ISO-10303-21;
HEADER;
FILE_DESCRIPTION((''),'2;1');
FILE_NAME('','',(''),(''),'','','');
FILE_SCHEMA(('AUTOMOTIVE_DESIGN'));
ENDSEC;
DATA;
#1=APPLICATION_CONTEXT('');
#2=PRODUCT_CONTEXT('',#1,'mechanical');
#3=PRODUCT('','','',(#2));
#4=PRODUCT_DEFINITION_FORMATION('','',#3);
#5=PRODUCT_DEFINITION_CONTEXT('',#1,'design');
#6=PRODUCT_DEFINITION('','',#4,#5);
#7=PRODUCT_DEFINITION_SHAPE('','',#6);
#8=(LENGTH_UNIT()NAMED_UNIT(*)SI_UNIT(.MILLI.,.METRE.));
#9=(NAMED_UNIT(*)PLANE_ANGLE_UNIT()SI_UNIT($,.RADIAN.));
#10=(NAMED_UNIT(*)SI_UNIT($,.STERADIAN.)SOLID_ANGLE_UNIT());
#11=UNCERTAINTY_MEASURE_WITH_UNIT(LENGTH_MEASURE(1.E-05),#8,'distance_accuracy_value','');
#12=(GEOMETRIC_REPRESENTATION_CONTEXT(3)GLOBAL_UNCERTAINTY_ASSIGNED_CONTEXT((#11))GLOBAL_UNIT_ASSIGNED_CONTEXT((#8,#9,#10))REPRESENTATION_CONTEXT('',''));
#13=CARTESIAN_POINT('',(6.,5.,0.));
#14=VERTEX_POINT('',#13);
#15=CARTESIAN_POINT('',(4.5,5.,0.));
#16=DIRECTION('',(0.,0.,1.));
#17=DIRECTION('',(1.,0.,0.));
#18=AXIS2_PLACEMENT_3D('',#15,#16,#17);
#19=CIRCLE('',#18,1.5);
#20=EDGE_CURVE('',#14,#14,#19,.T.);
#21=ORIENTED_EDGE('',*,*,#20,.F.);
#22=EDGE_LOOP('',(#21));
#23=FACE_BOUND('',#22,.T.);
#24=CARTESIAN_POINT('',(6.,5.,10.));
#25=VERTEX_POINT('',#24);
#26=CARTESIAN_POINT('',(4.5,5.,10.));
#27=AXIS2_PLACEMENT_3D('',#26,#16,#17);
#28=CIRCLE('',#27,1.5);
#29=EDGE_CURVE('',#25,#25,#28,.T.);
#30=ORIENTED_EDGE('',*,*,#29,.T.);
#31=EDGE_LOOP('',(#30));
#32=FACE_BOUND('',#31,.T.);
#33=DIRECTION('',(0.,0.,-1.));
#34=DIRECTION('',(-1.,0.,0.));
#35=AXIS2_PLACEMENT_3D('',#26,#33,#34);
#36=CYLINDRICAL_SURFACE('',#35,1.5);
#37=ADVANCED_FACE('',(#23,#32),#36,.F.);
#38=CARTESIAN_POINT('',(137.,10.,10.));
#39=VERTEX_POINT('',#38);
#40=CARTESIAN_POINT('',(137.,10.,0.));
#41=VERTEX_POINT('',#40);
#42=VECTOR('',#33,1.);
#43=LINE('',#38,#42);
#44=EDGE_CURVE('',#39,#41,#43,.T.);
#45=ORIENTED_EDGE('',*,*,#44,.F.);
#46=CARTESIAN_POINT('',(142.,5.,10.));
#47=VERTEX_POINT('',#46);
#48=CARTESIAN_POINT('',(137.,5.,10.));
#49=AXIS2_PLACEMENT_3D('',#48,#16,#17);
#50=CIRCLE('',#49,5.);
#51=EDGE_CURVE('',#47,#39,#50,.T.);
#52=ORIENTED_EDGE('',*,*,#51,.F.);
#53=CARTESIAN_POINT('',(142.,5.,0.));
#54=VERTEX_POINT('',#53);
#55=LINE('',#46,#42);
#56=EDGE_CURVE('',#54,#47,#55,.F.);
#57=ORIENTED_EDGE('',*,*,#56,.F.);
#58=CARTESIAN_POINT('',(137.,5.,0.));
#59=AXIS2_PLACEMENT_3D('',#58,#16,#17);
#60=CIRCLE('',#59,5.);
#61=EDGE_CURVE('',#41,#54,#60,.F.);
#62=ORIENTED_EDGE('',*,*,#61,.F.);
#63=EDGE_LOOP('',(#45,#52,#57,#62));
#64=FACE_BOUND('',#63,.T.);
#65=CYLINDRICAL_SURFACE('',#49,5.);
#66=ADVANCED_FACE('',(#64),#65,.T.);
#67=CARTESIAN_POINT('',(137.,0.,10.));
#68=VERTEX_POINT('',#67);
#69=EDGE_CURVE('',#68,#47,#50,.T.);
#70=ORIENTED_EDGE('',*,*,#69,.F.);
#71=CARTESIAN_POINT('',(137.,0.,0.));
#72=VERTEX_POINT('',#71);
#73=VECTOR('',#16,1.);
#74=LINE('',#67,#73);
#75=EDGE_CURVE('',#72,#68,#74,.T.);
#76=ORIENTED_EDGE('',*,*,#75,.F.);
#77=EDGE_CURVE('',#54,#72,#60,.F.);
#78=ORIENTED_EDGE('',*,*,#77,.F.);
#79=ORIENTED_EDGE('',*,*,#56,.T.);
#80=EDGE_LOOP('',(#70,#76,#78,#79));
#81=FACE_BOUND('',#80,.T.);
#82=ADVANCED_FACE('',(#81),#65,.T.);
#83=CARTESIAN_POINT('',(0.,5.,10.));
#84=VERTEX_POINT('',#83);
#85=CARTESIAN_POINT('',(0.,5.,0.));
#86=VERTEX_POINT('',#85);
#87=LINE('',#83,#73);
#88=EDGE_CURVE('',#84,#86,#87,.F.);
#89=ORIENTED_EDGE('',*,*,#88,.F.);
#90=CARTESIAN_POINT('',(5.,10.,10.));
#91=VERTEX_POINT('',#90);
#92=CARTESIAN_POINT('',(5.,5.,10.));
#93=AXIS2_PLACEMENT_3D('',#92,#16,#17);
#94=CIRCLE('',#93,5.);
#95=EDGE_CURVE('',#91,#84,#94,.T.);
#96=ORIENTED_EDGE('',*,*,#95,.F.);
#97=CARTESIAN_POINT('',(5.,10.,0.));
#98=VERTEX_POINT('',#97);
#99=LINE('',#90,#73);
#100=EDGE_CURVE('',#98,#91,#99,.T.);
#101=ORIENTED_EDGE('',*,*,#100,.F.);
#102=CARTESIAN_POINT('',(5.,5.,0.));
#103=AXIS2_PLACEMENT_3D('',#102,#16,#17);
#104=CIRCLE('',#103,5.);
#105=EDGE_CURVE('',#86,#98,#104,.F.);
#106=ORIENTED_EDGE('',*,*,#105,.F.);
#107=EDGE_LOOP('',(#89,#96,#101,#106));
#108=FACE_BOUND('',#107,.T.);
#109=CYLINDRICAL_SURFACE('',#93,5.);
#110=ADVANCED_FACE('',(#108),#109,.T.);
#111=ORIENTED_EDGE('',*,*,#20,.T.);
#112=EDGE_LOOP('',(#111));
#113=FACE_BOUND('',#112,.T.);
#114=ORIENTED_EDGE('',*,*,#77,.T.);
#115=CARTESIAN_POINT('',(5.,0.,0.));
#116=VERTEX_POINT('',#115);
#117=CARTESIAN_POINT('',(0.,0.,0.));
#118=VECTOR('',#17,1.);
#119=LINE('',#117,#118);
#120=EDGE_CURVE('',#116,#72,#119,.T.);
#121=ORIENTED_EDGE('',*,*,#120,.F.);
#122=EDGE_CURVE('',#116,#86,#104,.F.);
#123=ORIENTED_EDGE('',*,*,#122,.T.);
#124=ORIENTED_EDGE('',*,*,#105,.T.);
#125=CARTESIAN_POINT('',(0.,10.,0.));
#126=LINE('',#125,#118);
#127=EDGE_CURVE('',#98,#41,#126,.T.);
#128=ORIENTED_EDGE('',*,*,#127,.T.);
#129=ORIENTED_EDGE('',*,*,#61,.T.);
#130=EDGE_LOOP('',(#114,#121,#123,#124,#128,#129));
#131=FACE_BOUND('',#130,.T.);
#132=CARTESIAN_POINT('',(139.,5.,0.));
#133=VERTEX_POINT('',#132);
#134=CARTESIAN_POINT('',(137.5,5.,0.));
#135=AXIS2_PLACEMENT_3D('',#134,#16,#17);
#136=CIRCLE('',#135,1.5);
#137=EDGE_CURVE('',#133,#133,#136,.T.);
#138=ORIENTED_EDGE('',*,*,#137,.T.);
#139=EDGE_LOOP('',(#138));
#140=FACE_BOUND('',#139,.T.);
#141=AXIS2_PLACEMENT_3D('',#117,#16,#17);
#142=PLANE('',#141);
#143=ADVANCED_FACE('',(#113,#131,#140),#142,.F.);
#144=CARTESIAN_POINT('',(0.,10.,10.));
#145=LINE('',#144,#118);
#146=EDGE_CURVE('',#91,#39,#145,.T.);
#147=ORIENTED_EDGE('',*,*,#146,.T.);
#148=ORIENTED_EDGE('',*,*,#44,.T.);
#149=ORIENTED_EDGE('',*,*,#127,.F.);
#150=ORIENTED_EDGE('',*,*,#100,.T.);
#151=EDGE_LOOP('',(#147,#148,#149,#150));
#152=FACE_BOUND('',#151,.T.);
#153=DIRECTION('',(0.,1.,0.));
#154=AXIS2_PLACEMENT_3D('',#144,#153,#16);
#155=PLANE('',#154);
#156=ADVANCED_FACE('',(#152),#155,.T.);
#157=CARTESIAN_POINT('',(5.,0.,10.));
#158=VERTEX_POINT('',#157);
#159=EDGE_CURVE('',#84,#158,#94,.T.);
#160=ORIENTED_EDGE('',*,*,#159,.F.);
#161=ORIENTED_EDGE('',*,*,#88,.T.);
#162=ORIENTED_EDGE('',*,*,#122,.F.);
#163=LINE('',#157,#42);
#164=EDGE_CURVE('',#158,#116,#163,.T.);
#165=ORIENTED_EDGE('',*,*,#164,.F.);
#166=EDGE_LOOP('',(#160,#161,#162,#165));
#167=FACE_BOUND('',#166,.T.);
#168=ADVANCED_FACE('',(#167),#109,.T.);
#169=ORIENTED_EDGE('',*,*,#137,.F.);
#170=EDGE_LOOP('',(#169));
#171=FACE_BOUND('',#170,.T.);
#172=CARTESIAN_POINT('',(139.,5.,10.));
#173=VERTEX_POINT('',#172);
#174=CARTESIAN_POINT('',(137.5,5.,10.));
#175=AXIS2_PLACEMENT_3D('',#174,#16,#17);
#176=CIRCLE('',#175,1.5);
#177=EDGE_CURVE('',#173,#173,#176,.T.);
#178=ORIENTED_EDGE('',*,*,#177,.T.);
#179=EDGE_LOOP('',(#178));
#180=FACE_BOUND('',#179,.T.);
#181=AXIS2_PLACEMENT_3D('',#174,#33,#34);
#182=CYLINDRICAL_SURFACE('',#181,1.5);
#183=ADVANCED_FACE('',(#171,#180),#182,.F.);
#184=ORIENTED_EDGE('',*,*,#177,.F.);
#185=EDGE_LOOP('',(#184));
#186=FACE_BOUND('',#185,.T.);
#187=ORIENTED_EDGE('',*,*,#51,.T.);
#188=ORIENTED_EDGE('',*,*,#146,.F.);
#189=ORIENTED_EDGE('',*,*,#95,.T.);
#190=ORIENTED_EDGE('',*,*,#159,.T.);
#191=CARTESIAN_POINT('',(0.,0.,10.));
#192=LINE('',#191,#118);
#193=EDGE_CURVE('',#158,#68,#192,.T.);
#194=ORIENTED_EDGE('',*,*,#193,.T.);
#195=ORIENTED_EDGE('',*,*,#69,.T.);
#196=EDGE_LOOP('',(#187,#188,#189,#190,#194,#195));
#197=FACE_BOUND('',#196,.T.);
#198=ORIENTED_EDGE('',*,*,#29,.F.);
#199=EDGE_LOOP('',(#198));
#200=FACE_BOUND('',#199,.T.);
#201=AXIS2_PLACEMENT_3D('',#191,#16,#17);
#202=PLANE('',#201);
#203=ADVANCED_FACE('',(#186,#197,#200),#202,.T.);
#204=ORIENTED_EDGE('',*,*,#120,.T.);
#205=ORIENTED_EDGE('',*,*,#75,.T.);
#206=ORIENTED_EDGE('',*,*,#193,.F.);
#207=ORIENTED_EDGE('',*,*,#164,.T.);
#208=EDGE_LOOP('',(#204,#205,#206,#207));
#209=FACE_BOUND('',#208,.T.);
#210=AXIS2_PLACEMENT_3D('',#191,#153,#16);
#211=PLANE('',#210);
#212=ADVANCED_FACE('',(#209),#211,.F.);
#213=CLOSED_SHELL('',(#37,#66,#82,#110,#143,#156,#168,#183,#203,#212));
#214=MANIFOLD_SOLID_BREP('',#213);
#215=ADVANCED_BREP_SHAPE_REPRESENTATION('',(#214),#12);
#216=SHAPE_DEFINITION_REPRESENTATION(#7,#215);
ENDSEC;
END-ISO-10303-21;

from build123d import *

# Parameters (mm, degrees)
BOSS_EXTRUDE1_DEPTH = 10
FILLET2_R           = 5
FILLET3_R           = 5
FILLET4_R           = 5
FILLET5_R           = 5


with BuildPart() as part:
    # Sketch1 → Boss-Extrude1 (new body)
    with BuildSketch(Plane.XY):
        with BuildLine():
            Line((0, 10), (0, 5))
            Line((0, 5), (3, 5))
            ThreePointArc((3, 5), (4.5, 6.5), (6, 5))
            Line((6, 5), (136, 5))
            ThreePointArc((136, 5), (137.5, 6.5), (139, 5))
            Line((139, 5), (142, 5))
            Line((142, 5), (142, 10))
            Line((142, 10), (0, 10))
        make_face()
        with BuildLine():
            Line((3, 5), (0, 5))
            Line((0, 5), (0, 0))
            Line((0, 0), (142, 0))
            Line((142, 0), (142, 5))
            Line((142, 5), (139, 5))
            ThreePointArc((139, 5), (137.5, 3.5), (136, 5))
            Line((136, 5), (6, 5))
            ThreePointArc((6, 5), (4.5, 3.5), (3, 5))
        make_face()
    extrude(amount=BOSS_EXTRUDE1_DEPTH)

    # Fillet2
    fillet2_edges = [part.edges().sort_by_distance(p)[0] for p in [
        (0, 10, 5),
    ]]
    fillet(fillet2_edges, radius=FILLET2_R)

    # Fillet3
    fillet3_edges = [part.edges().sort_by_distance(p)[0] for p in [
        (0, 0, 5),
    ]]
    fillet(fillet3_edges, radius=FILLET3_R - 0.0001)  # a hair under: the kernel refuses the full size

    # Fillet4
    fillet4_edges = [part.edges().sort_by_distance(p)[0] for p in [
        (142, 10, 5),
    ]]
    fillet(fillet4_edges, radius=FILLET4_R)

    # Fillet5
    fillet5_edges = [part.edges().sort_by_distance(p)[0] for p in [
        (142, 0, 5),
    ]]
    fillet(fillet5_edges, radius=FILLET5_R - 0.0001)  # a hair under: the kernel refuses the full size


solid = part.part
